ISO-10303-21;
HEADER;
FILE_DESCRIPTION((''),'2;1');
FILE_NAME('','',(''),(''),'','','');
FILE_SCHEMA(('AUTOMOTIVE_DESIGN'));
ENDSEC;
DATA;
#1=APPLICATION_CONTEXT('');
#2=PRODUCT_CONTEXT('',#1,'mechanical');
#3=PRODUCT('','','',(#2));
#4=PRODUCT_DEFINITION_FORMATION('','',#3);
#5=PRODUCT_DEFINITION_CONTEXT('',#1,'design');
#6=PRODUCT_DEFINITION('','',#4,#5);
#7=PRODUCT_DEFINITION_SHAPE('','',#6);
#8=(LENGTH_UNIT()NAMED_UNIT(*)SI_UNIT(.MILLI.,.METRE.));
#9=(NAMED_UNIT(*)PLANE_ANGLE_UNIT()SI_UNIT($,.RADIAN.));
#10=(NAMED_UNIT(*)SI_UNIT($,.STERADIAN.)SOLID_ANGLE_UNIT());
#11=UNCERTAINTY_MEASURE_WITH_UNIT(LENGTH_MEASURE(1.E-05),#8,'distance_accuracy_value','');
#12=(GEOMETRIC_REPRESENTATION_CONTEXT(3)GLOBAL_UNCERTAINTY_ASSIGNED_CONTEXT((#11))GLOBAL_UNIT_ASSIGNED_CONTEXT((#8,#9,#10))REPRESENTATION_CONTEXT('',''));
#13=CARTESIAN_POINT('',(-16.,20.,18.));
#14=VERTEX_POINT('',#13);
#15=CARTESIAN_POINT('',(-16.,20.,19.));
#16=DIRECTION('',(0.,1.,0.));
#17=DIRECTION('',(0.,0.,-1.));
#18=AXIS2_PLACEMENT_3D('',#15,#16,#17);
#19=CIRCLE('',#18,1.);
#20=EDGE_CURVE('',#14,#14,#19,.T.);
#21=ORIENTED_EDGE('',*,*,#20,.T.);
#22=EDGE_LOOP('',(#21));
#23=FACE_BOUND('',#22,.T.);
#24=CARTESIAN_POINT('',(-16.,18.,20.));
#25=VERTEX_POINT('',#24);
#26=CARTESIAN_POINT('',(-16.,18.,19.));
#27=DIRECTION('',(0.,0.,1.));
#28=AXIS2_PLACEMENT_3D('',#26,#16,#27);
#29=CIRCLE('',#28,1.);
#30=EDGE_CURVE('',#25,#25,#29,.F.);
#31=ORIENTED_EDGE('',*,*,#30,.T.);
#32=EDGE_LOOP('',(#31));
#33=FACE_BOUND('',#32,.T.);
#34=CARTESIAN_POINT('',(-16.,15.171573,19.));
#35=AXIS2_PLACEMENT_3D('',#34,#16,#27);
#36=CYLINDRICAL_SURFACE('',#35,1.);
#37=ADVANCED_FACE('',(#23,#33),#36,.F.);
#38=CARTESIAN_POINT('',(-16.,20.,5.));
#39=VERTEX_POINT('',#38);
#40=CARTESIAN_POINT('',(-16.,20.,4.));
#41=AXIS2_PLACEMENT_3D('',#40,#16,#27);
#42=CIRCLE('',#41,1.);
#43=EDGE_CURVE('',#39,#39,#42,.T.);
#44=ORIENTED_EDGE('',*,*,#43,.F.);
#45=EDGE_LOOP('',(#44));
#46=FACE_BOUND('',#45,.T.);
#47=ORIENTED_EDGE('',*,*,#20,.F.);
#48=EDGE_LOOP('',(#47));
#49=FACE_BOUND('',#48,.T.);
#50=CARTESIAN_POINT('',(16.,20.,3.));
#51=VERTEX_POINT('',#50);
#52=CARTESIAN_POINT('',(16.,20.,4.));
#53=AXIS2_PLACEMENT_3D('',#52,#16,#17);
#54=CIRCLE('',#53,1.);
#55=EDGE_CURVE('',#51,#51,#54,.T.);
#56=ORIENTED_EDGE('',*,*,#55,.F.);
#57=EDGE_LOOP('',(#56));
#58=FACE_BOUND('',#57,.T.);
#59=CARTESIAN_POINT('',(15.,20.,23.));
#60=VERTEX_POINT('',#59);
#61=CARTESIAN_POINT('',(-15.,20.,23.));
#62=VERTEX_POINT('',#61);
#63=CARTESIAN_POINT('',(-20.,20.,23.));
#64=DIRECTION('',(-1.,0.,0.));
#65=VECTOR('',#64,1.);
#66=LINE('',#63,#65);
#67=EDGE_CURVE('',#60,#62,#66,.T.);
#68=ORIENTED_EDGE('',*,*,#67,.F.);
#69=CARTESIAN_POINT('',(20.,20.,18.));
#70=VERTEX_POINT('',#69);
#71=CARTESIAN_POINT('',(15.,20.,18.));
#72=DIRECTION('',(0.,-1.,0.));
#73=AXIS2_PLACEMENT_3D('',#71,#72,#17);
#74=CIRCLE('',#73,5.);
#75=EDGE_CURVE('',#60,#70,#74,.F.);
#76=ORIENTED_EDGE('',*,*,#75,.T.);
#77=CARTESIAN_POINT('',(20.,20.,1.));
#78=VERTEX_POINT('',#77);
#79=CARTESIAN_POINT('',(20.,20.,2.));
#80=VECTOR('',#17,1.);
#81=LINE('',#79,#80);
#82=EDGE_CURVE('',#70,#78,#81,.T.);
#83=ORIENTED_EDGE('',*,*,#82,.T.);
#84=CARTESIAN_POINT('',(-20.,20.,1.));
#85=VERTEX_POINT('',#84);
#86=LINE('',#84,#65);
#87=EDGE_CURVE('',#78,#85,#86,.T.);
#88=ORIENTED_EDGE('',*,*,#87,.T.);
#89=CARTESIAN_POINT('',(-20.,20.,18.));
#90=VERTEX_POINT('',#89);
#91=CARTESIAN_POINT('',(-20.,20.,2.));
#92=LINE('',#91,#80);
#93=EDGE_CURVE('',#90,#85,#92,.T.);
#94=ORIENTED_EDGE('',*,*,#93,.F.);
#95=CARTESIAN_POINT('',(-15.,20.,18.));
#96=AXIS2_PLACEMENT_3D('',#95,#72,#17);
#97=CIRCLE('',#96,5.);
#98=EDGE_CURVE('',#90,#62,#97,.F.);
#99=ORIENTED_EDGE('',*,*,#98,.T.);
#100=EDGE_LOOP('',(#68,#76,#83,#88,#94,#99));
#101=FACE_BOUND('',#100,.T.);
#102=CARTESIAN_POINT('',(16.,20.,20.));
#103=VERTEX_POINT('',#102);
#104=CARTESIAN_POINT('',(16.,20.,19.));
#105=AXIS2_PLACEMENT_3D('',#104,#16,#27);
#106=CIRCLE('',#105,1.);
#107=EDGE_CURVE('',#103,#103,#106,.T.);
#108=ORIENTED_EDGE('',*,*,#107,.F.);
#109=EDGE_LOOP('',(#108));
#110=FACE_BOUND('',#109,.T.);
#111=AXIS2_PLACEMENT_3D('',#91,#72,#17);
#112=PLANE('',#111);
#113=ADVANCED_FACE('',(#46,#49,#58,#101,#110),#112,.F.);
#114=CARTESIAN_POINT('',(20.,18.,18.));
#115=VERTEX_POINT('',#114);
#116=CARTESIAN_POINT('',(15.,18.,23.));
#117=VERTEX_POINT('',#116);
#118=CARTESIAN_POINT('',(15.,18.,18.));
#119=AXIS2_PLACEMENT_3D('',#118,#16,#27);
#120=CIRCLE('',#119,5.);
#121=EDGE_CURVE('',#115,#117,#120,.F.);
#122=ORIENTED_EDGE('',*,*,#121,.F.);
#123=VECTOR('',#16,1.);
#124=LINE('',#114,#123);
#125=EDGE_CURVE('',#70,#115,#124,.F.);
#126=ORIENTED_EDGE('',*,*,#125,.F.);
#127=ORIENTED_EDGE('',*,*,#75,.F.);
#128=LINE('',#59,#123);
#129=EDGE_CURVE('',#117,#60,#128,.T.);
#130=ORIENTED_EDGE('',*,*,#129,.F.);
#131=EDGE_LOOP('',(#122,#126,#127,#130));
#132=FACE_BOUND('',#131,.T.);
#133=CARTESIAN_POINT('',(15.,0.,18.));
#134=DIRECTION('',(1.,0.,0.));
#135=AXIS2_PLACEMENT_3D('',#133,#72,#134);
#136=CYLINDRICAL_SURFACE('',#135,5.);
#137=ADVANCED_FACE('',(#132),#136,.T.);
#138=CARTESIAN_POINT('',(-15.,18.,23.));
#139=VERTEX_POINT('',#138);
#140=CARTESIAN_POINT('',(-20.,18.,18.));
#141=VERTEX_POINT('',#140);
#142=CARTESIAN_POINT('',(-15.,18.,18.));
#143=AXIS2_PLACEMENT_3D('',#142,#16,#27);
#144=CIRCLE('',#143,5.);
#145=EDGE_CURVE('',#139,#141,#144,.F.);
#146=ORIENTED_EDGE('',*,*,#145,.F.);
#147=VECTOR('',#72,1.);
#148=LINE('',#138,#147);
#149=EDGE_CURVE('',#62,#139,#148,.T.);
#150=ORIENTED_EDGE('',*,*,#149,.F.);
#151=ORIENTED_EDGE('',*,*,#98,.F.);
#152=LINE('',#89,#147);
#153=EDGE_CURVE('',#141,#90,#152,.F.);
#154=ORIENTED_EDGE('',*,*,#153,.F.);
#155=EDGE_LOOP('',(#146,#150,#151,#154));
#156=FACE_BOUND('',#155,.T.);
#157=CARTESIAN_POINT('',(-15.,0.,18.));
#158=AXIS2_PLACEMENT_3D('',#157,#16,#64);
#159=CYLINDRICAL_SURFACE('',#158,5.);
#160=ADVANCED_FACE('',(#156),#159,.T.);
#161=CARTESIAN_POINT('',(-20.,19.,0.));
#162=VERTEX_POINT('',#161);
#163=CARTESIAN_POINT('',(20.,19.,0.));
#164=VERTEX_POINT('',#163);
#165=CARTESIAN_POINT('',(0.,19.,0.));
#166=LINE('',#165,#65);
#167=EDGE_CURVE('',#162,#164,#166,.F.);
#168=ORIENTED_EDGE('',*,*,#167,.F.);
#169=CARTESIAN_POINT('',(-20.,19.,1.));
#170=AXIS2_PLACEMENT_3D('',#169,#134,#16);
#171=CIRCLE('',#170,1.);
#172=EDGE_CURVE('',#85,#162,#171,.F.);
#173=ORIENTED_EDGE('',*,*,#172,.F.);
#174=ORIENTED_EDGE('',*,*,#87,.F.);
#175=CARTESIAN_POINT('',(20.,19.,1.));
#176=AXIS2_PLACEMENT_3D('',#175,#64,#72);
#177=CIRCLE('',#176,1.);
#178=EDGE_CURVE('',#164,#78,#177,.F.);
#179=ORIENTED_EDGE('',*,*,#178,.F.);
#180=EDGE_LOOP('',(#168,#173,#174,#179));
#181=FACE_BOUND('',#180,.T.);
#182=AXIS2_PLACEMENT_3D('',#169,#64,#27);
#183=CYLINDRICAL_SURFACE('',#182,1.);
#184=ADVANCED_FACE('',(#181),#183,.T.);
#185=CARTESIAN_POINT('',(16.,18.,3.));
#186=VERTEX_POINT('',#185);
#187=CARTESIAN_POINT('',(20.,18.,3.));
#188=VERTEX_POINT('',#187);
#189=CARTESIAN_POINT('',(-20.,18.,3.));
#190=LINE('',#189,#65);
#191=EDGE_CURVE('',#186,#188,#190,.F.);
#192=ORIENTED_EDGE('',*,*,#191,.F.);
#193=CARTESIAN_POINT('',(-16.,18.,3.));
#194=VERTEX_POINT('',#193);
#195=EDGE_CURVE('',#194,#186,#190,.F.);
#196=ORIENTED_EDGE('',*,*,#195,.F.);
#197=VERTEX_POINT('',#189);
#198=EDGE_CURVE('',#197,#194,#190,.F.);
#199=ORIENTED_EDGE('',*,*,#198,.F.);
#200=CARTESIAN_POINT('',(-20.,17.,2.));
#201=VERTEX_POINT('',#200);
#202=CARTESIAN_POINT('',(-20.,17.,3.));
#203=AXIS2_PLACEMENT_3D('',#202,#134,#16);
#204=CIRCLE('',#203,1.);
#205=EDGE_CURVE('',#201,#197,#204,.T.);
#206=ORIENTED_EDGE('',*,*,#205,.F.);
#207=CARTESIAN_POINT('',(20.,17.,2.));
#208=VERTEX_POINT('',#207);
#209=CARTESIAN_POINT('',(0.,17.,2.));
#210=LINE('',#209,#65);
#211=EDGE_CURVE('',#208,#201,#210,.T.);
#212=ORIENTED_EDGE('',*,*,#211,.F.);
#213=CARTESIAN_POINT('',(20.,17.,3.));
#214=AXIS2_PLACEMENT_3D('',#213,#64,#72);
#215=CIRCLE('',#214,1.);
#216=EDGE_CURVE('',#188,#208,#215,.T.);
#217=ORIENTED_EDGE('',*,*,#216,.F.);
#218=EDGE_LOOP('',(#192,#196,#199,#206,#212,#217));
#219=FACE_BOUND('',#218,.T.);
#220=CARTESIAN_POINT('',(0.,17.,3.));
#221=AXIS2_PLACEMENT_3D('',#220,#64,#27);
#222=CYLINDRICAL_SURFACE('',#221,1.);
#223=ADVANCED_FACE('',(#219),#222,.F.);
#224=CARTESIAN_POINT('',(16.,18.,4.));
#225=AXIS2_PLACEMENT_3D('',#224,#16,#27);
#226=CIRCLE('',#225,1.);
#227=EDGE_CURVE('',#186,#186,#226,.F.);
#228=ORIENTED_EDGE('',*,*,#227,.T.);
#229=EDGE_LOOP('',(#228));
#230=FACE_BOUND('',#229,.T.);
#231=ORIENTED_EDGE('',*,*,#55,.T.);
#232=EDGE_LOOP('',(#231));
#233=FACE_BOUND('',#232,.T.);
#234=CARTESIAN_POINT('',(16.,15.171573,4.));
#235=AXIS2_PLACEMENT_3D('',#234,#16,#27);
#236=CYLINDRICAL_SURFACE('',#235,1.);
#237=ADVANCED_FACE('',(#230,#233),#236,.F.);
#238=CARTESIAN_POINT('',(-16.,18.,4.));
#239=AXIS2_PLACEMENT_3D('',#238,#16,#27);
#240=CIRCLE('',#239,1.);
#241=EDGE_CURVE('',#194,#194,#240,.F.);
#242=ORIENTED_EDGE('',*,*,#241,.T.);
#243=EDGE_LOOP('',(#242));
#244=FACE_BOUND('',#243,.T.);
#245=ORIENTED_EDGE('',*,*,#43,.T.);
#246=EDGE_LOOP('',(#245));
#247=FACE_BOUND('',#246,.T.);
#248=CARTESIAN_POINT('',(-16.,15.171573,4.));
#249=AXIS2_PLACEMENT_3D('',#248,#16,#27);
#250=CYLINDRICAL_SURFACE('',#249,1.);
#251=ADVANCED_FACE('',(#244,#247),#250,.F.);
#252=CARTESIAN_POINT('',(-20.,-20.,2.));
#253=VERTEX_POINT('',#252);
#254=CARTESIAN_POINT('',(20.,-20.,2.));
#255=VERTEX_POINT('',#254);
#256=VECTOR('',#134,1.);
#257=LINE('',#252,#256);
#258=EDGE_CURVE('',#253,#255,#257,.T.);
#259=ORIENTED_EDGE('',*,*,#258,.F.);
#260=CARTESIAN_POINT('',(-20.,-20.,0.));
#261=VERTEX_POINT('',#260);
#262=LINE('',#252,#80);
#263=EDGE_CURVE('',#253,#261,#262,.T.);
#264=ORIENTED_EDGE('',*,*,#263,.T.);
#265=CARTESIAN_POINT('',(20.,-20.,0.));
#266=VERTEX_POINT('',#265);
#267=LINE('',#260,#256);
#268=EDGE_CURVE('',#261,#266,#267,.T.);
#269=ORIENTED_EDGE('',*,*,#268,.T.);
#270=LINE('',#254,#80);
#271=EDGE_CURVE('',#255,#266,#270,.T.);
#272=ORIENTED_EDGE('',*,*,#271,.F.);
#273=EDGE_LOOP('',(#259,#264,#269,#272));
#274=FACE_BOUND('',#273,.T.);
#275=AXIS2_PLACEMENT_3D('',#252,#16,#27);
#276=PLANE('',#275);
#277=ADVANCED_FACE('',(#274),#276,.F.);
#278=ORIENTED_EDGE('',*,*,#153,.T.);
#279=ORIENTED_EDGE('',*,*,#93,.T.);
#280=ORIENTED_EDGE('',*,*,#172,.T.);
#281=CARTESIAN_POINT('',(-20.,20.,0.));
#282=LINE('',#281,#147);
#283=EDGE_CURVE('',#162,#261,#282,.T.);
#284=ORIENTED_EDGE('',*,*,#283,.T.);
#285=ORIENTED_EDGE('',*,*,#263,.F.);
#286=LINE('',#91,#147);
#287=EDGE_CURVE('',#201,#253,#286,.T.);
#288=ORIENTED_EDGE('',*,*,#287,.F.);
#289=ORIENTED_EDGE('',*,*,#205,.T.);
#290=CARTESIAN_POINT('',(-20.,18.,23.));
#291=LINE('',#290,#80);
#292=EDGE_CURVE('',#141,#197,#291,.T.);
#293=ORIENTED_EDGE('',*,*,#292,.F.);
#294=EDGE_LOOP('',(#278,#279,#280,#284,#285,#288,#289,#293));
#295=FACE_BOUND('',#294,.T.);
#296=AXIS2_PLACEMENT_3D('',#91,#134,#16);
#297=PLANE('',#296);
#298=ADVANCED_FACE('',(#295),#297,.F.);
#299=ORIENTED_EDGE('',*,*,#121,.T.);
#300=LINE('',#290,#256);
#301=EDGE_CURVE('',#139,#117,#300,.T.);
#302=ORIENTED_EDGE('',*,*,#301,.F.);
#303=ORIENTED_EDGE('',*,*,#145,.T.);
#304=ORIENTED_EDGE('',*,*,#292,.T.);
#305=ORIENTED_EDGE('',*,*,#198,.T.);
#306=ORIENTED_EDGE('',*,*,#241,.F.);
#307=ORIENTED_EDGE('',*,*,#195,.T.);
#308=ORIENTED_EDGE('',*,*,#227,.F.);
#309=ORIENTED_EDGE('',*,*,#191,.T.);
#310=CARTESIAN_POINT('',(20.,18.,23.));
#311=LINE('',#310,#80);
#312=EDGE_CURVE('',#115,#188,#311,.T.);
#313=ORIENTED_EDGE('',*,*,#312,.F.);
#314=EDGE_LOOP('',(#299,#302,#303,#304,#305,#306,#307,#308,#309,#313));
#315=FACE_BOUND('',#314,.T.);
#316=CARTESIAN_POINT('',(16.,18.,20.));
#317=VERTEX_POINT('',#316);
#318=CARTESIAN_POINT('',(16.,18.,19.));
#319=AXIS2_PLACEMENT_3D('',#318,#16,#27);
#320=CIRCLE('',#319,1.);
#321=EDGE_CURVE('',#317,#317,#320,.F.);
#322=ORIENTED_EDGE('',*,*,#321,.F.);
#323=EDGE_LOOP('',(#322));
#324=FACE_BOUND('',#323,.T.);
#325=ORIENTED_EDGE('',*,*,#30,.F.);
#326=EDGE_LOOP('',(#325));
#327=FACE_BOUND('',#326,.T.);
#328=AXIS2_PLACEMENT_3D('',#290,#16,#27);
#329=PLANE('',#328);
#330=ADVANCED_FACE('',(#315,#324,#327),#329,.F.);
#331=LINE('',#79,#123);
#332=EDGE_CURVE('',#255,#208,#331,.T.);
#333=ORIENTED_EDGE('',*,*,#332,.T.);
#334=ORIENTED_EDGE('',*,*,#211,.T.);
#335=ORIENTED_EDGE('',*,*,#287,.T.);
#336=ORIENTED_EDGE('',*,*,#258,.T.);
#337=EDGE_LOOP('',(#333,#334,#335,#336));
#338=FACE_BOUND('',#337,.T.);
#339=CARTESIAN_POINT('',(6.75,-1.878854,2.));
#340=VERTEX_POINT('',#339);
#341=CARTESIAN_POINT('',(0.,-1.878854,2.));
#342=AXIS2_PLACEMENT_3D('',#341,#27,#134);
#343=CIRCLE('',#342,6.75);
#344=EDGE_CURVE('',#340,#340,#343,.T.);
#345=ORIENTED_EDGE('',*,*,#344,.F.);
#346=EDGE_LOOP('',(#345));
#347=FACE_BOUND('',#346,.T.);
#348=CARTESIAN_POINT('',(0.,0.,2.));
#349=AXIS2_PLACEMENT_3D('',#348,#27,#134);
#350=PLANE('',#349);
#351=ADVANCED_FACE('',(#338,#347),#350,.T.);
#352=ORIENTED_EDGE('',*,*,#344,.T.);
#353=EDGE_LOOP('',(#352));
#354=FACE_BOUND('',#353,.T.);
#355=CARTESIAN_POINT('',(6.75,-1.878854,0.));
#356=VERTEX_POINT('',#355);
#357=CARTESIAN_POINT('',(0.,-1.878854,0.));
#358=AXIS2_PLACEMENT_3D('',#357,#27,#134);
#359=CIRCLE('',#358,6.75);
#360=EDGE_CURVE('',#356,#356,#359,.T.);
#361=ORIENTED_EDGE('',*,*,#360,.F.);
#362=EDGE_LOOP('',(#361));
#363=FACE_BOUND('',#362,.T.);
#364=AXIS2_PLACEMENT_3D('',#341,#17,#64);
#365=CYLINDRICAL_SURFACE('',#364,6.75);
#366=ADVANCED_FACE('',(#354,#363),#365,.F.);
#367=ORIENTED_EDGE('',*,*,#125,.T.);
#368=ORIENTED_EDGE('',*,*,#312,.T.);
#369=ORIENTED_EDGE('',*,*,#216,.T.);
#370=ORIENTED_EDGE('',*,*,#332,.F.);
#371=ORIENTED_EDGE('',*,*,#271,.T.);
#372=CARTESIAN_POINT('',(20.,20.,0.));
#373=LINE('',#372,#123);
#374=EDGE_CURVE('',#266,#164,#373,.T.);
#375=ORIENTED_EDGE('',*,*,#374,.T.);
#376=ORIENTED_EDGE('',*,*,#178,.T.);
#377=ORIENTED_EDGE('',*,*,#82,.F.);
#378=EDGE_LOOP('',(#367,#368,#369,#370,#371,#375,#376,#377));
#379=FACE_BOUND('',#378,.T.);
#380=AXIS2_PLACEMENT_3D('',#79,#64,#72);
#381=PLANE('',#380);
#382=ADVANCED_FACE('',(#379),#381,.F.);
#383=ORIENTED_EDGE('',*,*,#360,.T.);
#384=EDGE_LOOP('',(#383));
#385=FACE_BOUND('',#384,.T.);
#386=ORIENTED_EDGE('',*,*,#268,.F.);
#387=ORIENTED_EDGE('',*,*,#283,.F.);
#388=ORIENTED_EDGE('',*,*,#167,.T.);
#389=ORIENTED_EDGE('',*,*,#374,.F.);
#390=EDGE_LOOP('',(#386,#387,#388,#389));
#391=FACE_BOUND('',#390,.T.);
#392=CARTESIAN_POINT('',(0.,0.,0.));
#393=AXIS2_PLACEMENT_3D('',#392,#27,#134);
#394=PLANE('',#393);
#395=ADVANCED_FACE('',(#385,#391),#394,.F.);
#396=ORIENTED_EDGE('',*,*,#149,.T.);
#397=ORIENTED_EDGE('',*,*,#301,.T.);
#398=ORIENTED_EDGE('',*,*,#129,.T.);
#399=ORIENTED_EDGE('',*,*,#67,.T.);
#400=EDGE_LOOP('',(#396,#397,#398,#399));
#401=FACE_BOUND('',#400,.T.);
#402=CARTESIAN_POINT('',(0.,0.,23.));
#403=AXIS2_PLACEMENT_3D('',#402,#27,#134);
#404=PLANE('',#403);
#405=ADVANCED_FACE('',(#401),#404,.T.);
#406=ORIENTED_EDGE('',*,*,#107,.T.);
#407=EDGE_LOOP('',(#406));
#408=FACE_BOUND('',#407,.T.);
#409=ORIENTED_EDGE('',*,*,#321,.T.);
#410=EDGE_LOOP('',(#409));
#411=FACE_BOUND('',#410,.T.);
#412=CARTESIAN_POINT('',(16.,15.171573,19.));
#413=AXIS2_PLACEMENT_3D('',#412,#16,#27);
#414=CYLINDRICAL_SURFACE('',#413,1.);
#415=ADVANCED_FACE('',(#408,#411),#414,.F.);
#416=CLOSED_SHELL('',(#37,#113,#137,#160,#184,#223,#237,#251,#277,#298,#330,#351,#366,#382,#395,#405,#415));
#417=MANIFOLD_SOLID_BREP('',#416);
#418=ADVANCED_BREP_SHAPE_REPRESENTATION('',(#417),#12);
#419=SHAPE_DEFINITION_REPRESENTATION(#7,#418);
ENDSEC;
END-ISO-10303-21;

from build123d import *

# Parameters (mm, degrees)
SKETCH1_W           = 40
SKETCH1_H           = 40
SKETCH1_R           = 6.75
BOSS_EXTRUDE2_DEPTH = 2
SKETCH2_W           = 40
SKETCH2_H           = 2
BOSS_EXTRUDE3_DEPTH = 23
SKETCH3_R           = 1
CUT_EXTRUDE1_DEPTH  = 2
FILLET1_R           = 1
FILLET2_R           = 1
FILLET3_R           = 5


with BuildPart() as part:
    # Sketch1 → Boss-Extrude2 (new body)
    with BuildSketch(Plane.XY):
        Rectangle(SKETCH1_W, SKETCH1_H)
        with Locations((0, -1.878854291)):
            Circle(SKETCH1_R, mode=Mode.SUBTRACT)
    extrude(amount=BOSS_EXTRUDE2_DEPTH)

    # Sketch2 → Boss-Extrude3 (add)
    with BuildSketch(Plane.XY):
        with Locations((0, 19)):
            Rectangle(SKETCH2_W, SKETCH2_H)
    extrude(amount=BOSS_EXTRUDE3_DEPTH)

    # Sketch3 → Cut-Extrude1 (cut)
    with BuildSketch(Plane(origin=(0, 20, 0), x_dir=(1, 0, 0), z_dir=(0, 1, 0))):
        with Locations(Location((-16, -4, 0), (0, 0, 270))):
            Circle(SKETCH3_R)
        with Locations(Location((16, -4, 0), (0, 0, 270))):
            Circle(SKETCH3_R)
        with Locations(Location((16, -19, 0), (0, 0, 270))):
            Circle(SKETCH3_R)
        with Locations(Location((-16, -19, 0), (0, 0, 270))):
            Circle(SKETCH3_R)
    extrude(amount=-CUT_EXTRUDE1_DEPTH, mode=Mode.SUBTRACT)

    # Fillet1
    fillet1_edges = [part.edges().sort_by_distance(p)[0] for p in [
        (0, 20, 0),
    ]]
    fillet(fillet1_edges, radius=FILLET1_R)

    # Fillet2
    fillet2_edges = [part.edges().sort_by_distance(p)[0] for p in [
        (0, 18, 2),
    ]]
    fillet(fillet2_edges, radius=FILLET2_R - 0.0001)  # a hair under: the kernel refuses the full size

    # Fillet3
    fillet3_edges = [part.edges().sort_by_distance(p)[0] for p in [
        (-20, 19, 23),
        (20, 19, 23),
    ]]
    fillet(fillet3_edges, radius=FILLET3_R)


solid = part.part
